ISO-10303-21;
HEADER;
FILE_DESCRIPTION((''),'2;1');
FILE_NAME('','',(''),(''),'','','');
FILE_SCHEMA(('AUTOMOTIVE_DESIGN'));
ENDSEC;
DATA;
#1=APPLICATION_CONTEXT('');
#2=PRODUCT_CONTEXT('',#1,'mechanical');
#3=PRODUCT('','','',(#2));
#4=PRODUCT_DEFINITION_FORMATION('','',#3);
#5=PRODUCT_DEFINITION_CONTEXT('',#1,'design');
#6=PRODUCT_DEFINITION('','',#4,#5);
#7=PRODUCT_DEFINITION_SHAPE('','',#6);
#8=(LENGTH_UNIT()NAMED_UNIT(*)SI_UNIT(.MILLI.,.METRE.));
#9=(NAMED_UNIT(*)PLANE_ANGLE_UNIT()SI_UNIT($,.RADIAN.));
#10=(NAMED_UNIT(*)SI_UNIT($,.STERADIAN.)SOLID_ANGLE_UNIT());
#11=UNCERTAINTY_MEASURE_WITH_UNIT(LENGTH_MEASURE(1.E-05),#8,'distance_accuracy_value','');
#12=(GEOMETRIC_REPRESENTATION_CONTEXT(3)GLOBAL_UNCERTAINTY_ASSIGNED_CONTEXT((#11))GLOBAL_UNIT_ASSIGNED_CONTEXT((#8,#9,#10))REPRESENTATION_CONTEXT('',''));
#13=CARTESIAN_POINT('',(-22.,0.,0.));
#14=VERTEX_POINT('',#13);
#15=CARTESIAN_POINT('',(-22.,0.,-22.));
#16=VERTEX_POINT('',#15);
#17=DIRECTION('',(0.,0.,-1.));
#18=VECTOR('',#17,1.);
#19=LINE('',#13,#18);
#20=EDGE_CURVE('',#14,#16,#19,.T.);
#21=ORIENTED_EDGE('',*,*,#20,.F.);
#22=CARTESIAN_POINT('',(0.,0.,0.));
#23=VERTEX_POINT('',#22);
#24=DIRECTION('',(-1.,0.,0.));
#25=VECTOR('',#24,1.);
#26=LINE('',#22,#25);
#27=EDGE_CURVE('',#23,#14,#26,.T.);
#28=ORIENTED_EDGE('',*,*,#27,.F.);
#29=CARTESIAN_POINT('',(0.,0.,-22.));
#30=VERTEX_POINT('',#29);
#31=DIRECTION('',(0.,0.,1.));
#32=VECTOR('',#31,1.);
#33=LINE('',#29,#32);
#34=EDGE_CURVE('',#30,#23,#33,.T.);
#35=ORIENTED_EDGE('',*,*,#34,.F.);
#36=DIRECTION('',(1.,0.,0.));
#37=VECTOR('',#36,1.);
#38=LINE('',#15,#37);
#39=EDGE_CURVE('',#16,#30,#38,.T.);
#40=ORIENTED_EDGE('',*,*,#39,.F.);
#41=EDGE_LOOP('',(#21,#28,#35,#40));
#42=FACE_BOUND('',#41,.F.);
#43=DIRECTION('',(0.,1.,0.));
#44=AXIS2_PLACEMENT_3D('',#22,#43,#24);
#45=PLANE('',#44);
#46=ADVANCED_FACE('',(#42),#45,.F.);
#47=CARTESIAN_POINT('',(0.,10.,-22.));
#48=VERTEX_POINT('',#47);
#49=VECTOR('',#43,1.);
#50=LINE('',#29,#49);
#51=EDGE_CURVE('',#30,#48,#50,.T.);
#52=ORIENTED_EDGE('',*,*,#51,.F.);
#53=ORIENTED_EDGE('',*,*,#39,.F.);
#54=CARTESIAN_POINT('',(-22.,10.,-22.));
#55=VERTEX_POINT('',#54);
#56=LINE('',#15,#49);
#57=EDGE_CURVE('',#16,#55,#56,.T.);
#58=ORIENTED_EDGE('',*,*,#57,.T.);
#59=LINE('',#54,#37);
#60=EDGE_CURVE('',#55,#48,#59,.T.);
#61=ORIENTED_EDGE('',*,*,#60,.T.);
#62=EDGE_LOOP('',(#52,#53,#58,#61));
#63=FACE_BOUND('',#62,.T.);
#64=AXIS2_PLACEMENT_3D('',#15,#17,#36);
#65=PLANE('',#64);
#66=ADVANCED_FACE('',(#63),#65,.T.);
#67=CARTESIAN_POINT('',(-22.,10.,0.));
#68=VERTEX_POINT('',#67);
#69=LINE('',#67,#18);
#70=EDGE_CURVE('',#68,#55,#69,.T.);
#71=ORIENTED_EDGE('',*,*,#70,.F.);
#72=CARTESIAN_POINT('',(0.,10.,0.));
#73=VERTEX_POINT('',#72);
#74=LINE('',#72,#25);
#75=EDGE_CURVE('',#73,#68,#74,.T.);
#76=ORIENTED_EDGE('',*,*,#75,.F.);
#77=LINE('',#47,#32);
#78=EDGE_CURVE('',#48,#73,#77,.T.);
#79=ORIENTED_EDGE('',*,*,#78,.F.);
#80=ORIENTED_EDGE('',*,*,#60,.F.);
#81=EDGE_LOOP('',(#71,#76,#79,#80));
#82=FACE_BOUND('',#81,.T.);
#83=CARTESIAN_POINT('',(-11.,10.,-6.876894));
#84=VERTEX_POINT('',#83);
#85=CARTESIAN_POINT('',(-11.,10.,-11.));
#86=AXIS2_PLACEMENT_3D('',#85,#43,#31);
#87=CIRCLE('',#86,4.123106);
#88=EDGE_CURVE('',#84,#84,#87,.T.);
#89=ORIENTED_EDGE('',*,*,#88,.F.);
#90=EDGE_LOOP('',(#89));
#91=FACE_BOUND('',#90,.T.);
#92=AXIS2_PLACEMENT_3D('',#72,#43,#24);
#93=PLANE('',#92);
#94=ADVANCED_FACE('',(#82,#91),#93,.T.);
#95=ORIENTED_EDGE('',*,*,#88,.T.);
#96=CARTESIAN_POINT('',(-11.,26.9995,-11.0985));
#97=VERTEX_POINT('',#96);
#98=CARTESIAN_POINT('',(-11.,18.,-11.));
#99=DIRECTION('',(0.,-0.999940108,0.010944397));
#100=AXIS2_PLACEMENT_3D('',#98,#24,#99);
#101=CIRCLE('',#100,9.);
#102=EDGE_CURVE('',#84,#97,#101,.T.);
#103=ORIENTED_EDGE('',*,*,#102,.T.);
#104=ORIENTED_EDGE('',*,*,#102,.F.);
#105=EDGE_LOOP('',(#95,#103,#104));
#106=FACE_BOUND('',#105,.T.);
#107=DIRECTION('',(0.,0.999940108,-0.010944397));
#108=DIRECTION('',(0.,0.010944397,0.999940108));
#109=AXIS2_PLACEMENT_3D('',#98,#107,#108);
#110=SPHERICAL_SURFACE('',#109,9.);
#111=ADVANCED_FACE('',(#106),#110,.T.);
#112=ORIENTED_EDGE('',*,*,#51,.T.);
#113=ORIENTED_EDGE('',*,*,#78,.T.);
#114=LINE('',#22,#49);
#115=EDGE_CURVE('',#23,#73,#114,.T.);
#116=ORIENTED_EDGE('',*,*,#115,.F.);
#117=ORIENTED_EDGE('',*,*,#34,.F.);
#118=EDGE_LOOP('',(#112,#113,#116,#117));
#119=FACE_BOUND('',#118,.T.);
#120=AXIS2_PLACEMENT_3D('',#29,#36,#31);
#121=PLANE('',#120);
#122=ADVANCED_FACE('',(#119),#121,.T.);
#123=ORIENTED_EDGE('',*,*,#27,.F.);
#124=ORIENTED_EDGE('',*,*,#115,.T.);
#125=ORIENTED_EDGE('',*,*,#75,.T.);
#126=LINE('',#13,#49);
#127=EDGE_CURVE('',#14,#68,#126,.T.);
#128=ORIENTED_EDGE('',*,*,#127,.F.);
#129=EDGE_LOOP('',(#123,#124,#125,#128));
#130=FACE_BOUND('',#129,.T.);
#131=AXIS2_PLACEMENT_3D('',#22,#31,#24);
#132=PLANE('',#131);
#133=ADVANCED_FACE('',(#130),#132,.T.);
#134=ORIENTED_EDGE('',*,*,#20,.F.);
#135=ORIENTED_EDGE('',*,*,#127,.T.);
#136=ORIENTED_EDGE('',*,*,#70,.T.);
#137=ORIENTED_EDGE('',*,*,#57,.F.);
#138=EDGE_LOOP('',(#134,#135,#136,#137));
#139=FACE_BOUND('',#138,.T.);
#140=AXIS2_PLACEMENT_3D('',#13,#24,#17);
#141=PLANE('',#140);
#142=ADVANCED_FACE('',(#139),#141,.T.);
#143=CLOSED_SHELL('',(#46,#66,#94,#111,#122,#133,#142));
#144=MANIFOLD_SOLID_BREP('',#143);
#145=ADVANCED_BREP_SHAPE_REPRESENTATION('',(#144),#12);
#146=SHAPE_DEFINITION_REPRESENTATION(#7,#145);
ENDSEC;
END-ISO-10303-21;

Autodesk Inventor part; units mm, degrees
ref_plane "YZ Plane" through (0, 0, 0) normal (1, 0, 0) x (0, 1, 0)
ref_plane "XZ Plane" through (0, 0, 0) normal (0, 1, 0) x (-1, 0, 0)
ref_plane "XY Plane" through (0, 0, 0) normal (0, 0, 1) x (1, 0, 0)
sketch "Sketch6" plane through (0, 0, 0) normal (0, 1, 0) x (-1, 0, 0)
  line L0 (0, 0) -> (22, 0)
  line L1 (22, 0) -> (22, -22)
  line L2 (22, -22) -> (0, -22)
  line L3 (0, -22) -> (0, 0)
  dimension "d18" = 22
  dimension "d19" = 22
extrude "Extrusion3" add sketch "Sketch6" along normal blind 10
ref_plane "Work Plane1" through (-11, 0, -22) normal (-1, 0, 0) x (0, 0, 1)
sketch "Sketch8" plane through (-11, 0, -22) normal (-1, 0, 0) x (0, 0, 1)
  line L0 (0, 10) -> (22, 10) projected
  line L1 (11, 10) -> (11, 18)
  circle A0 centre (11, 18) radius 9
  line L2 (11.0985, 9.0005) -> (10.9015, 26.9995)
  point P0 (22, 0)
  dimension "d30" = 8
  dimension "d31" = 18
revolve "Revolution2" add sketch "Sketch8" angle 360 about axis through (-11, 9.0005, -10.9015) along (0, 0.9999401, -0.0109435) picked at (12.4036, 12.6667) picked at (13.3498, 9.8198) contours A0 L0 L2 | L2 L0 A0
properties part number "sphere-test"
